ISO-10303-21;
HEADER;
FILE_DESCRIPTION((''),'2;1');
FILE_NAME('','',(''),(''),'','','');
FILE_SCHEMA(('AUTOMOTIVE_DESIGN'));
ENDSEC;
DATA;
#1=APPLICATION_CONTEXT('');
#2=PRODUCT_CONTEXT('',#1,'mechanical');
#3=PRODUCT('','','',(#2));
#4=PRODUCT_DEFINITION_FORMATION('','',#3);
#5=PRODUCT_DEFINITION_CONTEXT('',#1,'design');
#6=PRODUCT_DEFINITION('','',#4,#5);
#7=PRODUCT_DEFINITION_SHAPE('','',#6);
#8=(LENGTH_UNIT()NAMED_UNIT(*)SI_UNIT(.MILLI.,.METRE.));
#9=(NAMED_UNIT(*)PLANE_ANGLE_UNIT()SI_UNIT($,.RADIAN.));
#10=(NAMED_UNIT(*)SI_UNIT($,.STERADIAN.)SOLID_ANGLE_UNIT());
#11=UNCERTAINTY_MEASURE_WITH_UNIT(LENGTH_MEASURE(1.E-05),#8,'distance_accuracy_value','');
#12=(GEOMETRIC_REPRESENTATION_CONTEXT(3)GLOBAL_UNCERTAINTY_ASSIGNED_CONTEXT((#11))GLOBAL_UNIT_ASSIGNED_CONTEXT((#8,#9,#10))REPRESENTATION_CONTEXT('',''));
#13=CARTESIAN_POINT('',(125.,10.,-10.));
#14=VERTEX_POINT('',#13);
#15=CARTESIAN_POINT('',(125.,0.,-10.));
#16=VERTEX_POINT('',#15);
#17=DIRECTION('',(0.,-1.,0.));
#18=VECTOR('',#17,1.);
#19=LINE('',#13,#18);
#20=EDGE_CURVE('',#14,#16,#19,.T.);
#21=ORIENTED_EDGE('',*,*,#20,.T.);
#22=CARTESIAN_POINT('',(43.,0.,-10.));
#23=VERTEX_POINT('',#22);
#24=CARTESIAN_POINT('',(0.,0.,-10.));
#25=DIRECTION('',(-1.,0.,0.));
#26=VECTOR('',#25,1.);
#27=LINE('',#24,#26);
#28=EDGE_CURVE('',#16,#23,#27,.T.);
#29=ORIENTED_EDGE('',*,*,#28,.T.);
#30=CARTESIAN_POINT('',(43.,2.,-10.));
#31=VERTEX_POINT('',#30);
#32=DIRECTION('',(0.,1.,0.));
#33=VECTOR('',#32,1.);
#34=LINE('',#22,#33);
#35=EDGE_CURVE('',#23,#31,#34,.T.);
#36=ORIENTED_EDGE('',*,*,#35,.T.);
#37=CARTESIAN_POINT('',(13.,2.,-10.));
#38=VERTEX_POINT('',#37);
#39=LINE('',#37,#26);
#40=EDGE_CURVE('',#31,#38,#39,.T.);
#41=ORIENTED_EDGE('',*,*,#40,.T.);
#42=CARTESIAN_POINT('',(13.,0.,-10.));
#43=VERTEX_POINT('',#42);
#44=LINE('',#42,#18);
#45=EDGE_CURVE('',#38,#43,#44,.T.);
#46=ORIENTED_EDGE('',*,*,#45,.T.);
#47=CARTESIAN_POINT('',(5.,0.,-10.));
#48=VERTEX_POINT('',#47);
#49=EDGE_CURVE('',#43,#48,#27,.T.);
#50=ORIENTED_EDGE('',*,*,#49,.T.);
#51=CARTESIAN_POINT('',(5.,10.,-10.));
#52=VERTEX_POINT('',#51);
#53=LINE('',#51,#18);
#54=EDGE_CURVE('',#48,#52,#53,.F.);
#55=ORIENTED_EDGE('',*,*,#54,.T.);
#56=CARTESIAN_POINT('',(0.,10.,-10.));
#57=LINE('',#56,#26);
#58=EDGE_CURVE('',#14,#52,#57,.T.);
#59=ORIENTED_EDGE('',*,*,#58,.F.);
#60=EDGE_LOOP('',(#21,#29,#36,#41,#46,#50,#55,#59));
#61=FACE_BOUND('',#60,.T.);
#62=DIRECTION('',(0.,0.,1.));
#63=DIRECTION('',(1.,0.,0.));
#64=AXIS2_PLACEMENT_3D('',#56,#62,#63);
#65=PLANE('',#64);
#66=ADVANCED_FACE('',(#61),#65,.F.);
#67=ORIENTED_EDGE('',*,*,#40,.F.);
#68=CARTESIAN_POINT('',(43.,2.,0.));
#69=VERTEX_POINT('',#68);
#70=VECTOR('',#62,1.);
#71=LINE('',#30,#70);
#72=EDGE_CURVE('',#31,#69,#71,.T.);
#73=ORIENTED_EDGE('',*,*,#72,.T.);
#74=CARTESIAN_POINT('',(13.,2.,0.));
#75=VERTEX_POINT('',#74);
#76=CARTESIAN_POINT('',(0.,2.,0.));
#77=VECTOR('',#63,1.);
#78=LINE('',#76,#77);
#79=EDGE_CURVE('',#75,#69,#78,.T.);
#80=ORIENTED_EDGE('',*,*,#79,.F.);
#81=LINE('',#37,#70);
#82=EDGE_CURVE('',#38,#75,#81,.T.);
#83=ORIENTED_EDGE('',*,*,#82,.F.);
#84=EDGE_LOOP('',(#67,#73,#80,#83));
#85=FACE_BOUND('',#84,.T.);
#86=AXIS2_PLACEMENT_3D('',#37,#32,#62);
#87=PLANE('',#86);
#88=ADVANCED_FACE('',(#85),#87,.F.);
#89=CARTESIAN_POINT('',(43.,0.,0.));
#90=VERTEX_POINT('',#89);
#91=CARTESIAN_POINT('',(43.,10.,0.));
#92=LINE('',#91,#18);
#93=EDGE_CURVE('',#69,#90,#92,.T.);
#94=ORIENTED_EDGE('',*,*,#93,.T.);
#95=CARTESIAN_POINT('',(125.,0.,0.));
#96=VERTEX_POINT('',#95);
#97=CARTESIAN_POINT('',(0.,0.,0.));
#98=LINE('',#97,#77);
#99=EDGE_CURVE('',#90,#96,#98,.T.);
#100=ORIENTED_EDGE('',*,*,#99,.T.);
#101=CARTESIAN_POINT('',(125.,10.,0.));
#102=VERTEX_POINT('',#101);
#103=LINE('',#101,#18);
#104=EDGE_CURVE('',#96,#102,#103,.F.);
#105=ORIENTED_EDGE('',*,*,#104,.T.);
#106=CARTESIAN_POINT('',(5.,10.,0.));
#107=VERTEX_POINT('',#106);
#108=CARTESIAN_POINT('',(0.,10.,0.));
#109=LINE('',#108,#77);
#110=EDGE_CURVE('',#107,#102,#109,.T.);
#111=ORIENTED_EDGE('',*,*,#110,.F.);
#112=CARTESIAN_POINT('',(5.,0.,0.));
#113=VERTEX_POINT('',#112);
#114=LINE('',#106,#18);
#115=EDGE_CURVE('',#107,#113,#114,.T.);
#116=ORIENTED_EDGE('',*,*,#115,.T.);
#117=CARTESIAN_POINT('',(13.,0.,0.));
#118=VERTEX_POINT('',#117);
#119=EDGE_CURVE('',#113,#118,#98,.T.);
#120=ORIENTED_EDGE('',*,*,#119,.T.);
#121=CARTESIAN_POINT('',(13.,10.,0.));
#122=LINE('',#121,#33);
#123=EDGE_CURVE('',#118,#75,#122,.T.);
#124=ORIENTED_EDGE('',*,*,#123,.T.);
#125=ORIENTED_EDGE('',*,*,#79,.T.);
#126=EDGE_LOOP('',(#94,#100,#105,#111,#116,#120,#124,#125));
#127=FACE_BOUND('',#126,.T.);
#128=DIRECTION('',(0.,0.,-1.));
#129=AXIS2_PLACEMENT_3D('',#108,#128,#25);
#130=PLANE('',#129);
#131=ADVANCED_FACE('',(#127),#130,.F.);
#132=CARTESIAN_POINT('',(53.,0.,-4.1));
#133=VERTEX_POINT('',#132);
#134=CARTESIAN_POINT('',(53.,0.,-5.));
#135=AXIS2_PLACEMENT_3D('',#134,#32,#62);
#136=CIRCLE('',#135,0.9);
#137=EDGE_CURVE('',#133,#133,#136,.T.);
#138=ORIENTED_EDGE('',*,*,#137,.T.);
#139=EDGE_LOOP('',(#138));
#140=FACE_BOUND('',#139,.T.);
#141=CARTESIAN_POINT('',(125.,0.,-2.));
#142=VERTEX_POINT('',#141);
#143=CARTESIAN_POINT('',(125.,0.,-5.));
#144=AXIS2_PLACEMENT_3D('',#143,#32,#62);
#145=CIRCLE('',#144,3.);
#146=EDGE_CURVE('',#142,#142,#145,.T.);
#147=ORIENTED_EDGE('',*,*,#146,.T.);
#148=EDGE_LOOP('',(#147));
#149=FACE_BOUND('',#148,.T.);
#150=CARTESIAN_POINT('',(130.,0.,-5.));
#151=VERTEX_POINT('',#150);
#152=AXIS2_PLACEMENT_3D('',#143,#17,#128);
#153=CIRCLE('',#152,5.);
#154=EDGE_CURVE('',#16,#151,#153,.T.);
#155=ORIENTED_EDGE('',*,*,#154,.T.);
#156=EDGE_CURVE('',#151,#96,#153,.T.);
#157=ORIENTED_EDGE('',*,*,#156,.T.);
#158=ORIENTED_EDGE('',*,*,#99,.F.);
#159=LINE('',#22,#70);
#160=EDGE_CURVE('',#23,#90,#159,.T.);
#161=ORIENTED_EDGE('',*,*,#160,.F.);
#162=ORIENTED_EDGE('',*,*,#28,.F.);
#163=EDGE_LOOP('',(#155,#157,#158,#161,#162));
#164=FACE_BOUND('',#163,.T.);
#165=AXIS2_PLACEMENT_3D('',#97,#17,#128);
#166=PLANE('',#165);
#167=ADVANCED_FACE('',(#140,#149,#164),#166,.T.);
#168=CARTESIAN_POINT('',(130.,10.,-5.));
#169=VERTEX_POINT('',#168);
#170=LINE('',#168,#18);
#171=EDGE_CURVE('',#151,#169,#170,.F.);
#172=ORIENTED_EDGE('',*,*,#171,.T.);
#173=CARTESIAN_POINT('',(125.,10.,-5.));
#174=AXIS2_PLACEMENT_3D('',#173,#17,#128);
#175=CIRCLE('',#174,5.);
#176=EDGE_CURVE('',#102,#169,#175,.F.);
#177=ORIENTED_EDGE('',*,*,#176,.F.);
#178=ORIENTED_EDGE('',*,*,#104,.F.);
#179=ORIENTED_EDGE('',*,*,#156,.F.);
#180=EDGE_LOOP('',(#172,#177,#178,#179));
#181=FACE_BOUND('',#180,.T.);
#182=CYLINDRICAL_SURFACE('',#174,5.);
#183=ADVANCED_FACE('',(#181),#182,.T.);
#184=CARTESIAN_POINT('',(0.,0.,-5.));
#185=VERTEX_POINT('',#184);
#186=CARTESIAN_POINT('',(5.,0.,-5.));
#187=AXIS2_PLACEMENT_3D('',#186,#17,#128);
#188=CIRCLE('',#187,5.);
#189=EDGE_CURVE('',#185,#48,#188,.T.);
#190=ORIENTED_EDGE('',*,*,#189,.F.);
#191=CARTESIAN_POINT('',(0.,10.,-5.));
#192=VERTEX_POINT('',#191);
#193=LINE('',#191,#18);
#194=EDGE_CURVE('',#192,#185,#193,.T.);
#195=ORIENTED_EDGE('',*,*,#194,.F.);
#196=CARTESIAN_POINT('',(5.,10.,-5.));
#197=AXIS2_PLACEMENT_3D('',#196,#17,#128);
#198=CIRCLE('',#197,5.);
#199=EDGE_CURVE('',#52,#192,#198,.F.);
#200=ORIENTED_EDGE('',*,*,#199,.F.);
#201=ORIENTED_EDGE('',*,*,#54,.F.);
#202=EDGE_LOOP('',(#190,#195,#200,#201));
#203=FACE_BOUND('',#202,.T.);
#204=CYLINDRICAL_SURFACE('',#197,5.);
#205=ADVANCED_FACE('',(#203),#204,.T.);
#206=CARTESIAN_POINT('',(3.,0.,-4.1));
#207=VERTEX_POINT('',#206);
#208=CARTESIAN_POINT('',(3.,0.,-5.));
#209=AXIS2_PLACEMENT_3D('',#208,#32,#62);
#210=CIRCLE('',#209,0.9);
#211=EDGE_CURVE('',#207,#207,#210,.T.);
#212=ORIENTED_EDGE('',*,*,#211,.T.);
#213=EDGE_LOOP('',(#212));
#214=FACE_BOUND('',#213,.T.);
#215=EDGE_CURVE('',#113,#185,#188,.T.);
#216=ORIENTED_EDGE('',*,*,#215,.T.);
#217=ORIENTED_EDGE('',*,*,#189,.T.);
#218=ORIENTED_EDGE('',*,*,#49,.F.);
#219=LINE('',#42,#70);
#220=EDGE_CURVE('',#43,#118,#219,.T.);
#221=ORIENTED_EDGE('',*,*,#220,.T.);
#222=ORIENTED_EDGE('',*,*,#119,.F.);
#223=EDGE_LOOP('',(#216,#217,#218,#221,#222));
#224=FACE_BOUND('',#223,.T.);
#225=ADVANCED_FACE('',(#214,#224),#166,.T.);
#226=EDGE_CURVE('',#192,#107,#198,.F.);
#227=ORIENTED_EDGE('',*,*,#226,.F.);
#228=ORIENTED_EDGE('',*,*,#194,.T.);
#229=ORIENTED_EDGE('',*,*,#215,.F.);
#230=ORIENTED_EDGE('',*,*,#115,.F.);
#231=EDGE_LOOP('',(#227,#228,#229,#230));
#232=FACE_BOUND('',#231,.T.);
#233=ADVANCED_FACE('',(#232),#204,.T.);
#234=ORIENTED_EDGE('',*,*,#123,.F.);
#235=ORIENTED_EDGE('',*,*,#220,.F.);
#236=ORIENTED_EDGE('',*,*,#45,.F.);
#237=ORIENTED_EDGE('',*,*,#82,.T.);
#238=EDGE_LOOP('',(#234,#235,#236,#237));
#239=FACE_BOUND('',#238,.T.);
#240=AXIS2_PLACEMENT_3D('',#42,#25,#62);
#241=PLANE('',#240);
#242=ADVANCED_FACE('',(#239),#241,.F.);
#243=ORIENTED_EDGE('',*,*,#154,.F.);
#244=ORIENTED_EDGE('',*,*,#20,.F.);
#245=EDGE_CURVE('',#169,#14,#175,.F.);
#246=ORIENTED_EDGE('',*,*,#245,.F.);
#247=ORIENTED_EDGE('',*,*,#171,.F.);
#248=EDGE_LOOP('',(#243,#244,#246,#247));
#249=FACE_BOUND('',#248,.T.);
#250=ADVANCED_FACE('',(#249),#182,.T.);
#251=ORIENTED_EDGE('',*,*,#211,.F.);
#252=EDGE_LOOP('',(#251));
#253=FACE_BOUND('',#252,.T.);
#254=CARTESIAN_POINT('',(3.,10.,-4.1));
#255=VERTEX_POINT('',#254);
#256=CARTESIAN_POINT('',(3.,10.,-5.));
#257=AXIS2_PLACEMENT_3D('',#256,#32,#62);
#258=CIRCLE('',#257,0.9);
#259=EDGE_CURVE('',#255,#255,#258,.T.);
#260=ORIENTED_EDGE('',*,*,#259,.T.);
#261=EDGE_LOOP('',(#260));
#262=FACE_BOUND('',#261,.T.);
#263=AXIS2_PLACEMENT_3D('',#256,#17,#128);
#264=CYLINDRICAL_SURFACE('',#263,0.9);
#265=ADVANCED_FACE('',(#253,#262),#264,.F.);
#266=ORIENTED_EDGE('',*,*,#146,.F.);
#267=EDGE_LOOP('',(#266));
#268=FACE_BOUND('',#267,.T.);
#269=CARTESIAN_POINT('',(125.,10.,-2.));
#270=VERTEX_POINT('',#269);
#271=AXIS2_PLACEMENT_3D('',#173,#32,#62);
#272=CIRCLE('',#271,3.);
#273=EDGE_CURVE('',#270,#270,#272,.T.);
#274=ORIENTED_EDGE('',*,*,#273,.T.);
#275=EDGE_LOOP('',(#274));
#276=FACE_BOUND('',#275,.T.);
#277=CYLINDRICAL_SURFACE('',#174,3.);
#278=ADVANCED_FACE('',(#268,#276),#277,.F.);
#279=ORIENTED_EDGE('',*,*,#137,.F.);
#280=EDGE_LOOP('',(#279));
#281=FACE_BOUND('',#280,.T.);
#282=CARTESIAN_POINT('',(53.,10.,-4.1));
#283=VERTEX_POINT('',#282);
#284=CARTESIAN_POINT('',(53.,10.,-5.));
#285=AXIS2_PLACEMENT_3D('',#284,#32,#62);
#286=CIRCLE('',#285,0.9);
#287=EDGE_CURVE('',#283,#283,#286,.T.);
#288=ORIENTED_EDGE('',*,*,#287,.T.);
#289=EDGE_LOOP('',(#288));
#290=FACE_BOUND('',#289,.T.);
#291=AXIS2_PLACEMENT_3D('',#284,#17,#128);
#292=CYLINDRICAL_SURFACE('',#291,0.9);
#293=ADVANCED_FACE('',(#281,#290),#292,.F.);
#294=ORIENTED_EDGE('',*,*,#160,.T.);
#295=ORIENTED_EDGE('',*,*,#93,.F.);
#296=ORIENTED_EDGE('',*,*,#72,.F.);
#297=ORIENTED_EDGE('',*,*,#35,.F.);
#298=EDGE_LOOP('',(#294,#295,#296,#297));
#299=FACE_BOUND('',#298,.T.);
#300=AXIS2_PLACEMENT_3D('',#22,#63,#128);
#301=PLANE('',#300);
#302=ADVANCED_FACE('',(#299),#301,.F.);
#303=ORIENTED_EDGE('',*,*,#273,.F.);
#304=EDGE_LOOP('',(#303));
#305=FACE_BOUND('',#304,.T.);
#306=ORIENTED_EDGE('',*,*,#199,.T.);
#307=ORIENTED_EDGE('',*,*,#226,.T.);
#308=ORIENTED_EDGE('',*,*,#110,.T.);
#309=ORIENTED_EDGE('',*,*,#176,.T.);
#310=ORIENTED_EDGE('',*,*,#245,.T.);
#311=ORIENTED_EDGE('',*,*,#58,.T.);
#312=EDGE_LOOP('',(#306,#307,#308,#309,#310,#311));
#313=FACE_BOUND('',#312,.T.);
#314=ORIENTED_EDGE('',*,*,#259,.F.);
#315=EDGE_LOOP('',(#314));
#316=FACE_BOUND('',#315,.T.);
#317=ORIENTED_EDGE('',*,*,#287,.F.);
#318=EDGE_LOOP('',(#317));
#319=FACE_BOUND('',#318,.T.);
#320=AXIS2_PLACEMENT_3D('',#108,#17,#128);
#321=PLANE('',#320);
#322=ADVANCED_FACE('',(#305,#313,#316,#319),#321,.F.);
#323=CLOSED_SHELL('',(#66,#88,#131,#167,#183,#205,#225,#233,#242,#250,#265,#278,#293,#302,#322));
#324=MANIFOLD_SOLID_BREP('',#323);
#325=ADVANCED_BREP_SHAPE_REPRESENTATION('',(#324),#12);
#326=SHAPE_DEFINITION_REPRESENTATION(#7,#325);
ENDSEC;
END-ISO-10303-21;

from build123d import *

# Parameters (mm, degrees)
SKETCH1_W               = 130
SKETCH1_H               = 10
SKETCH1_R               = 0.9
SKETCH1_R_2             = 3
BOSS_EXTRUDE1_DEPTH     = 10
CUT_EXTRUDE1_DEPTH      = 131.766968306
CUT_EXTRUDE1_DEPTH_BACK = 131.766968306
SKETCH2_W               = 30
SKETCH2_H               = 2
FILLET1_R               = 5


with BuildPart() as part:
    # Sketch1 → Boss-Extrude1 (new body)
    with BuildSketch(Plane(origin=(0, 0, 0), x_dir=(1, 0, 0), z_dir=(0, 1, 0))):
        with Locations((65, 5)):
            Rectangle(SKETCH1_W, SKETCH1_H)
        with Locations(Location((3, 5, 0), (0, 0, 270))):
            Circle(SKETCH1_R, mode=Mode.SUBTRACT)
        with Locations(Location((53, 5, 0), (0, 0, 270))):
            Circle(SKETCH1_R, mode=Mode.SUBTRACT)
        with Locations(Location((125, 5, 0), (0, 0, 270))):
            Circle(SKETCH1_R_2, mode=Mode.SUBTRACT)
    extrude(amount=BOSS_EXTRUDE1_DEPTH)

    # Sketch2 → Cut-Extrude1 (cut, two sides: drawn at the far end of the back side and taken through both)
    with BuildSketch(Plane.XY.offset(-CUT_EXTRUDE1_DEPTH_BACK)):
        with Locations((28, 1)):
            Rectangle(SKETCH2_W, SKETCH2_H)
    extrude(amount=CUT_EXTRUDE1_DEPTH + CUT_EXTRUDE1_DEPTH_BACK, mode=Mode.SUBTRACT)

    # Fillet1
    fillet1_edges = [part.edges().sort_by_distance(p)[0] for p in [
        (130, 5, 0),
        (130, 5, -10),
        (0, 5, 0),
        (0, 5, -10),
    ]]
    fillet(fillet1_edges, radius=FILLET1_R - 0.0001)  # a hair under: the kernel refuses the full size


solid = part.part
